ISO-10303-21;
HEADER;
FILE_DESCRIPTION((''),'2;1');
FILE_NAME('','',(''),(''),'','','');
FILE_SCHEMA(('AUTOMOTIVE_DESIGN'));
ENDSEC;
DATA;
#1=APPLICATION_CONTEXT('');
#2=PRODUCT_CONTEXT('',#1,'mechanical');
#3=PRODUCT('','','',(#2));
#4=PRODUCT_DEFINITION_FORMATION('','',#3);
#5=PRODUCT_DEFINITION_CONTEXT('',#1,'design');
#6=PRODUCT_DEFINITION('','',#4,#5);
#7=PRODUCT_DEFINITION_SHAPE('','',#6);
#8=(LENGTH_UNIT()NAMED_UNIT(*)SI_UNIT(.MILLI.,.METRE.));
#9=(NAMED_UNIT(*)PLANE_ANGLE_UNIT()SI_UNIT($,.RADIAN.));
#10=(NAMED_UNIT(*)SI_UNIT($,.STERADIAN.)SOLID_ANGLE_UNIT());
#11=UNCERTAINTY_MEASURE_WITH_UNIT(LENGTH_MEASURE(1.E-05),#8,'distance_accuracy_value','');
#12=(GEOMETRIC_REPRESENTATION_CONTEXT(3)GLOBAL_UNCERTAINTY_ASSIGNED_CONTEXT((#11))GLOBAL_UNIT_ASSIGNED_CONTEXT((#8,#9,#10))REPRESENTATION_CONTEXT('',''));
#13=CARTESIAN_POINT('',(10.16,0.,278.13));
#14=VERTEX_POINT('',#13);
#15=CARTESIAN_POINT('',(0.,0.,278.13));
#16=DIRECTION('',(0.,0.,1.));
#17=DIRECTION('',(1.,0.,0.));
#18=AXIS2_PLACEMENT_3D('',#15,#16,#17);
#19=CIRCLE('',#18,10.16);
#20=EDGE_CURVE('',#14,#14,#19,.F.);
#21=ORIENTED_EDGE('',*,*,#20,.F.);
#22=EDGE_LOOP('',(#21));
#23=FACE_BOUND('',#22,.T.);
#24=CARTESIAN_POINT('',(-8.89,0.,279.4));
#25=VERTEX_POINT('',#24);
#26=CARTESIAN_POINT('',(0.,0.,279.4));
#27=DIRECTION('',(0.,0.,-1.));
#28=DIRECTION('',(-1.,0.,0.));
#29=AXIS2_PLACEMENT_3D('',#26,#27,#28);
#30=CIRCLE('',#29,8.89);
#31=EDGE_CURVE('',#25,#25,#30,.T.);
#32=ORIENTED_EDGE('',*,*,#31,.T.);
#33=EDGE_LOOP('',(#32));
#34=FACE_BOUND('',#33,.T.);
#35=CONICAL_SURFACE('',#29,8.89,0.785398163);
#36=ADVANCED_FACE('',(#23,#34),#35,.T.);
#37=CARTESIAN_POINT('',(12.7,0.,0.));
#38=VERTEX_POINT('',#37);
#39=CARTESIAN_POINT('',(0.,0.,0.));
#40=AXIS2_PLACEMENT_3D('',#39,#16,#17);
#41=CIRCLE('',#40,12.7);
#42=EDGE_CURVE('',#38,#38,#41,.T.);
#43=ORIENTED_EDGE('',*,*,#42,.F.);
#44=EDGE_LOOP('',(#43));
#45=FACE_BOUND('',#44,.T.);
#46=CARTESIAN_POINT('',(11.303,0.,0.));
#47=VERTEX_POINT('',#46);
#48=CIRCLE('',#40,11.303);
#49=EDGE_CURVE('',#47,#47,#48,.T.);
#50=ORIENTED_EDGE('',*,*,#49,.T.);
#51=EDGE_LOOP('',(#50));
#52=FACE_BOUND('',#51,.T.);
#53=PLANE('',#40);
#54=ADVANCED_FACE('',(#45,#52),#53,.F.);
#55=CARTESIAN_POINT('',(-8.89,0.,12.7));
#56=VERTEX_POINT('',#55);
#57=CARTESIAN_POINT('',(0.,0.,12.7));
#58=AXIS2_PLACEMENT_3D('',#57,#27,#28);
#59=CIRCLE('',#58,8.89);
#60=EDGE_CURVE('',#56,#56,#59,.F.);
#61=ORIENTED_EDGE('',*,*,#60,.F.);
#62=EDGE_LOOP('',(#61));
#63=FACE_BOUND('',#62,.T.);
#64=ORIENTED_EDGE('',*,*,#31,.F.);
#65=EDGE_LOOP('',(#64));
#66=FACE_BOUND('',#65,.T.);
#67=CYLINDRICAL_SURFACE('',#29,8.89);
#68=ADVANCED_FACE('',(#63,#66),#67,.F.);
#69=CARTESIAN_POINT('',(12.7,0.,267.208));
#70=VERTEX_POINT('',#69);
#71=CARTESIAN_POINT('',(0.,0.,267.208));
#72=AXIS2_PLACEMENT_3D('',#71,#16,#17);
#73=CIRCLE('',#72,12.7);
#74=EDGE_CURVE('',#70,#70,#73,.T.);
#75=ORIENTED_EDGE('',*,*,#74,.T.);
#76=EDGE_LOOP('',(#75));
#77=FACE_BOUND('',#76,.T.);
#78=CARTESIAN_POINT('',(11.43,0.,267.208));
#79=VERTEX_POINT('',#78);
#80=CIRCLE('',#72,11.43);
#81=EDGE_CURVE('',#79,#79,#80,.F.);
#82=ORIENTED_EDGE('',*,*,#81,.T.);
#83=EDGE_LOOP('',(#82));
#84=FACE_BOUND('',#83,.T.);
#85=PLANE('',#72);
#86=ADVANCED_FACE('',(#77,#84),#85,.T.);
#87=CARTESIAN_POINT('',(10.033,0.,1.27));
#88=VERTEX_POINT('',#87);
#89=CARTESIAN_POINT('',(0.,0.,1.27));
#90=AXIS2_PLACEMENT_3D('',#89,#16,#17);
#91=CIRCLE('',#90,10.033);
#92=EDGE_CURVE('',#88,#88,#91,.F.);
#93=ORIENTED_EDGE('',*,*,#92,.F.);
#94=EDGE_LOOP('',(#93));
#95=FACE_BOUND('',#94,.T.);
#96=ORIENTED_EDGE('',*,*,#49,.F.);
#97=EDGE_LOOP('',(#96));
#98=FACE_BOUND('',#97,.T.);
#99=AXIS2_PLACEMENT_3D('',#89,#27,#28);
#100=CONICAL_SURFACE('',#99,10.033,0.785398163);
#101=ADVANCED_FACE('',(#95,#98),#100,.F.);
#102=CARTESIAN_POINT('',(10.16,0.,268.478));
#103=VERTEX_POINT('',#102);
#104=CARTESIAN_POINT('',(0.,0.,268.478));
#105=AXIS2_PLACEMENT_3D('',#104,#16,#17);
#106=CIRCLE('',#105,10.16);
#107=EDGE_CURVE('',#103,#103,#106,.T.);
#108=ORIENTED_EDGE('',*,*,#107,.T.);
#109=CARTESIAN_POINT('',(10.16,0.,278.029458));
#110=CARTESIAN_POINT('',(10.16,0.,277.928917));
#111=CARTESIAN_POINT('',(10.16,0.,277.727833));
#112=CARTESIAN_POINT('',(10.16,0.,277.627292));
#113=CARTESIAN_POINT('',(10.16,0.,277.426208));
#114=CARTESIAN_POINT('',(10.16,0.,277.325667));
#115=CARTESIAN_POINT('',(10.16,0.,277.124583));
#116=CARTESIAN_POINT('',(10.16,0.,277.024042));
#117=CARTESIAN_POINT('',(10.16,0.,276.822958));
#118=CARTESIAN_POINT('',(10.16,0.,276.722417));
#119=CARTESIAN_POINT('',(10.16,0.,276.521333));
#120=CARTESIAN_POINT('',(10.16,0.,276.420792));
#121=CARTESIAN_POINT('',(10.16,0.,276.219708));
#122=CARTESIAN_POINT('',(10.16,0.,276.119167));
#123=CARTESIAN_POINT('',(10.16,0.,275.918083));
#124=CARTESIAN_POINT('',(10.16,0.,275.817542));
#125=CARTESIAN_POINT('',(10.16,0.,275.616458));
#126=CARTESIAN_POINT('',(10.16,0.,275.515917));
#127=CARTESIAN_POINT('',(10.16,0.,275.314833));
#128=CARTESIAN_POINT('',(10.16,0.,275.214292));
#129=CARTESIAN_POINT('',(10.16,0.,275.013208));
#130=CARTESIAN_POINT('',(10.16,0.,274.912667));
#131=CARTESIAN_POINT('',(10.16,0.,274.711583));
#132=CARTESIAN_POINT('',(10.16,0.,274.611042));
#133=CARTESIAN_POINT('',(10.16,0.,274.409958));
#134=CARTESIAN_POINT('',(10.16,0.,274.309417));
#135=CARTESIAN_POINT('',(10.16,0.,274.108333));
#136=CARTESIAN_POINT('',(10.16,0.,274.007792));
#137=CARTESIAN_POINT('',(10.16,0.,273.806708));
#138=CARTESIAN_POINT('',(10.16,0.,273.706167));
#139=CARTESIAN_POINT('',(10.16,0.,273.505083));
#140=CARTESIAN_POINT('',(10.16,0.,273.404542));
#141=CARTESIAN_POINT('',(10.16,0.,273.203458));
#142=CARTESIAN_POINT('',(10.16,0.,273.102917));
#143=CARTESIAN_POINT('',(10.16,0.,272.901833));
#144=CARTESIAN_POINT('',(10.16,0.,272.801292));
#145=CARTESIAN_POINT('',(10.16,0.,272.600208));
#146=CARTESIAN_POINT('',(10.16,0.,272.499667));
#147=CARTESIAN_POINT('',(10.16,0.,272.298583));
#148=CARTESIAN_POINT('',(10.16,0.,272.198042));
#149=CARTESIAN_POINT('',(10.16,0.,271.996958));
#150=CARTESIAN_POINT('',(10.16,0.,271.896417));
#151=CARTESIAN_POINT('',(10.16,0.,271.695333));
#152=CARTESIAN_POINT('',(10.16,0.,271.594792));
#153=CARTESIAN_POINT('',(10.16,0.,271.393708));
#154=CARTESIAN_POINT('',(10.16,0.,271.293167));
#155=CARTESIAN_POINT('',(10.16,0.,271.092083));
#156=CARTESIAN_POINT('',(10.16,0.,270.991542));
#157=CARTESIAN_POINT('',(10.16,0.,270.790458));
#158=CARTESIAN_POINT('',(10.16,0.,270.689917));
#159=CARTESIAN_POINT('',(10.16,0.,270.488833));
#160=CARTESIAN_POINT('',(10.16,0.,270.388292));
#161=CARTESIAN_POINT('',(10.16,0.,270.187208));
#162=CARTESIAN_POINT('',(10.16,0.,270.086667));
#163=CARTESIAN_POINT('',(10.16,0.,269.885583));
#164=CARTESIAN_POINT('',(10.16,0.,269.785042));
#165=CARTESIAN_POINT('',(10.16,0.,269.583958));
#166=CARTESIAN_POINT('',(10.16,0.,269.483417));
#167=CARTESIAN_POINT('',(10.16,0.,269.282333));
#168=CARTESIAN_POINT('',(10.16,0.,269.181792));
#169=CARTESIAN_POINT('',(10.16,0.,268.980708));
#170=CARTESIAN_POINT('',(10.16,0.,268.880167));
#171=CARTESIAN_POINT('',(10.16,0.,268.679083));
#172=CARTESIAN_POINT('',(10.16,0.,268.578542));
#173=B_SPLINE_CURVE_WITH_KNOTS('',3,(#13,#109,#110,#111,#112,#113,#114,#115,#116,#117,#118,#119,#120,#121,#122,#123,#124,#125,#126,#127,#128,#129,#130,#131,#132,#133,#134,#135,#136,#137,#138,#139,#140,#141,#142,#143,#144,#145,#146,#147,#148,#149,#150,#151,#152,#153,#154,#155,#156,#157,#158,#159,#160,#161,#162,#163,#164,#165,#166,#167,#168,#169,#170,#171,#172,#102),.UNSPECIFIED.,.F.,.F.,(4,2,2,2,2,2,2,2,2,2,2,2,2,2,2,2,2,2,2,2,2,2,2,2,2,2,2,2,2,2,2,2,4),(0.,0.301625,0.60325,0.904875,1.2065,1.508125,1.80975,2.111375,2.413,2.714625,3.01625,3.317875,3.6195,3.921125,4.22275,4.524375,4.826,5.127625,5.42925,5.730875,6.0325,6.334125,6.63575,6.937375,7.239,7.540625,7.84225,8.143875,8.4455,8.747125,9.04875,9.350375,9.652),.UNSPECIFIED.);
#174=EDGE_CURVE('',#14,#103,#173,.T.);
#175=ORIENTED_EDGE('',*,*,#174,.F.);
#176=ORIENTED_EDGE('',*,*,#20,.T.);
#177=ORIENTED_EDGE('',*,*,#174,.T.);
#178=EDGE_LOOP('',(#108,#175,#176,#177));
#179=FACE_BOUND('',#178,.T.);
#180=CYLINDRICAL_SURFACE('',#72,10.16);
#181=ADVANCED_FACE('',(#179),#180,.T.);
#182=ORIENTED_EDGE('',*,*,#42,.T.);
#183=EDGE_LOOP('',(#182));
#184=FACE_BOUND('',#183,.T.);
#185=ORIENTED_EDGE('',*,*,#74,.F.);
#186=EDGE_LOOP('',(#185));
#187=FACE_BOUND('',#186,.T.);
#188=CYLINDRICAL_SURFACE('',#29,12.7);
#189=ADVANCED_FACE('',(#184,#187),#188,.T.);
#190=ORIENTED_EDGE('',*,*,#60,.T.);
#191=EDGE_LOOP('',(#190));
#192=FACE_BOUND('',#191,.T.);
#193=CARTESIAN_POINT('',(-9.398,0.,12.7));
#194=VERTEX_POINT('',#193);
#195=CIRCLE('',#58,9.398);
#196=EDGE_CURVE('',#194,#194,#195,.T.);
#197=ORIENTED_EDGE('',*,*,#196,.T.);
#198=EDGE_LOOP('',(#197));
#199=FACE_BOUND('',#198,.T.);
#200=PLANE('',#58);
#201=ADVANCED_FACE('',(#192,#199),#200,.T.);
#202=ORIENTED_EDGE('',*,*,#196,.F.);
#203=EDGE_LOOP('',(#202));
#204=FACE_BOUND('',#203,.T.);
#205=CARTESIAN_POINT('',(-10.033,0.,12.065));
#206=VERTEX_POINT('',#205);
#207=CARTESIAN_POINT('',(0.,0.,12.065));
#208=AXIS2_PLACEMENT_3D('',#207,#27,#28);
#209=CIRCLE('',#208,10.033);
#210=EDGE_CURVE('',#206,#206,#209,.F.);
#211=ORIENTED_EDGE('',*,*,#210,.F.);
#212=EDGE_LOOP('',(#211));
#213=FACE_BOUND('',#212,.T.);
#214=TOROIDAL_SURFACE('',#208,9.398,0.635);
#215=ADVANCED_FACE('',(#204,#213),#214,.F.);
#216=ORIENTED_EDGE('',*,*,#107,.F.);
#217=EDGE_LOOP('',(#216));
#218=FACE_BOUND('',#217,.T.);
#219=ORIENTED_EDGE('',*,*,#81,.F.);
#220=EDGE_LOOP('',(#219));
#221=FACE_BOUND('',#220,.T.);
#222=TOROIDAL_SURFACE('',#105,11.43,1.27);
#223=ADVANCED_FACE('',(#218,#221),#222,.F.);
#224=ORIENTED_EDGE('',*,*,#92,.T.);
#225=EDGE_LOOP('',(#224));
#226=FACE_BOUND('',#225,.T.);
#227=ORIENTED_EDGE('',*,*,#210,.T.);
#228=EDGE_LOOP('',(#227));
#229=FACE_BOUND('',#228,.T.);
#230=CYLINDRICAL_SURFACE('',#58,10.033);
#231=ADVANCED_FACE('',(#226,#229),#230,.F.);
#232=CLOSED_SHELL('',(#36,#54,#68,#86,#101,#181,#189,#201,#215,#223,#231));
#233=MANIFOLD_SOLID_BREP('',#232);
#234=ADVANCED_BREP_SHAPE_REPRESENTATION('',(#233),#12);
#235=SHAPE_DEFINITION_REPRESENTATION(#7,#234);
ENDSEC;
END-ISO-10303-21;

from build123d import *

# Parameters (mm, degrees)
SKETCH1_R           = 12.7
BOSS_EXTRUDE1_DEPTH = 279.4
SKETCH2_R           = 8.89
CUT_EXTRUDE1_DEPTH  = 280.9766776
SKETCH3_R           = 10.033
CUT_EXTRUDE2_DEPTH  = 12.7
CUT_EXTRUDE3_START  = -12.192
SKETCH4_R           = 12.7
SKETCH4_R_2         = 10.16
CUT_EXTRUDE3_DEPTH  = 12.192
FILLET1_R           = 1.27
CHAMFER1_SIZE       = 1.27
FILLET2_R           = 0.635
CHAMFER2_SIZE       = 1.27


with BuildPart() as part:
    # Sketch1 → Boss-Extrude1 (new body)
    with BuildSketch(Plane.XY):
        Circle(SKETCH1_R)
    extrude(amount=BOSS_EXTRUDE1_DEPTH)

    # Sketch2 → Cut-Extrude1 (cut, through all)
    with BuildSketch(Plane(origin=(0, 0, 0), x_dir=(-1, 0, 0), z_dir=(0, 0, -1))):
        Circle(SKETCH2_R)
    extrude(amount=-CUT_EXTRUDE1_DEPTH, mode=Mode.SUBTRACT)

    # Sketch3 → Cut-Extrude2 (cut)
    with BuildSketch(Plane(origin=(0, 0, 0), x_dir=(-1, 0, 0), z_dir=(0, 0, -1))):
        Circle(SKETCH3_R)
    extrude(amount=-CUT_EXTRUDE2_DEPTH, mode=Mode.SUBTRACT)

    # Sketch4 → Cut-Extrude3 (cut)
    with BuildSketch(Plane.XY.offset(279.4).offset(CUT_EXTRUDE3_START)):
        Circle(SKETCH4_R)
        Circle(SKETCH4_R_2, mode=Mode.SUBTRACT)
    extrude(amount=CUT_EXTRUDE3_DEPTH, mode=Mode.SUBTRACT)

    # Fillet1
    fillet1_edges = [part.edges().sort_by_distance(p)[0] for p in [
        (-10.16, 0, 267.208),
    ]]
    fillet(fillet1_edges, radius=FILLET1_R)

    # Chamfer1
    chamfer1_edges = [part.edges().sort_by_distance(p)[0] for p in [
        (10.033, 0, 0),
    ]]
    chamfer(chamfer1_edges, length=CHAMFER1_SIZE)

    # Fillet2
    fillet2_edges = [part.edges().sort_by_distance(p)[0] for p in [
        (10.033, 0, 12.7),
    ]]
    fillet(fillet2_edges, radius=FILLET2_R)

    # Chamfer2
    chamfer2_edges = [part.edges().sort_by_distance(p)[0] for p in [
        (-10.16, 0, 279.4),
    ]]
    chamfer(chamfer2_edges, length=CHAMFER2_SIZE - 0.0001)  # a hair under: the kernel refuses the full size


solid = part.part
